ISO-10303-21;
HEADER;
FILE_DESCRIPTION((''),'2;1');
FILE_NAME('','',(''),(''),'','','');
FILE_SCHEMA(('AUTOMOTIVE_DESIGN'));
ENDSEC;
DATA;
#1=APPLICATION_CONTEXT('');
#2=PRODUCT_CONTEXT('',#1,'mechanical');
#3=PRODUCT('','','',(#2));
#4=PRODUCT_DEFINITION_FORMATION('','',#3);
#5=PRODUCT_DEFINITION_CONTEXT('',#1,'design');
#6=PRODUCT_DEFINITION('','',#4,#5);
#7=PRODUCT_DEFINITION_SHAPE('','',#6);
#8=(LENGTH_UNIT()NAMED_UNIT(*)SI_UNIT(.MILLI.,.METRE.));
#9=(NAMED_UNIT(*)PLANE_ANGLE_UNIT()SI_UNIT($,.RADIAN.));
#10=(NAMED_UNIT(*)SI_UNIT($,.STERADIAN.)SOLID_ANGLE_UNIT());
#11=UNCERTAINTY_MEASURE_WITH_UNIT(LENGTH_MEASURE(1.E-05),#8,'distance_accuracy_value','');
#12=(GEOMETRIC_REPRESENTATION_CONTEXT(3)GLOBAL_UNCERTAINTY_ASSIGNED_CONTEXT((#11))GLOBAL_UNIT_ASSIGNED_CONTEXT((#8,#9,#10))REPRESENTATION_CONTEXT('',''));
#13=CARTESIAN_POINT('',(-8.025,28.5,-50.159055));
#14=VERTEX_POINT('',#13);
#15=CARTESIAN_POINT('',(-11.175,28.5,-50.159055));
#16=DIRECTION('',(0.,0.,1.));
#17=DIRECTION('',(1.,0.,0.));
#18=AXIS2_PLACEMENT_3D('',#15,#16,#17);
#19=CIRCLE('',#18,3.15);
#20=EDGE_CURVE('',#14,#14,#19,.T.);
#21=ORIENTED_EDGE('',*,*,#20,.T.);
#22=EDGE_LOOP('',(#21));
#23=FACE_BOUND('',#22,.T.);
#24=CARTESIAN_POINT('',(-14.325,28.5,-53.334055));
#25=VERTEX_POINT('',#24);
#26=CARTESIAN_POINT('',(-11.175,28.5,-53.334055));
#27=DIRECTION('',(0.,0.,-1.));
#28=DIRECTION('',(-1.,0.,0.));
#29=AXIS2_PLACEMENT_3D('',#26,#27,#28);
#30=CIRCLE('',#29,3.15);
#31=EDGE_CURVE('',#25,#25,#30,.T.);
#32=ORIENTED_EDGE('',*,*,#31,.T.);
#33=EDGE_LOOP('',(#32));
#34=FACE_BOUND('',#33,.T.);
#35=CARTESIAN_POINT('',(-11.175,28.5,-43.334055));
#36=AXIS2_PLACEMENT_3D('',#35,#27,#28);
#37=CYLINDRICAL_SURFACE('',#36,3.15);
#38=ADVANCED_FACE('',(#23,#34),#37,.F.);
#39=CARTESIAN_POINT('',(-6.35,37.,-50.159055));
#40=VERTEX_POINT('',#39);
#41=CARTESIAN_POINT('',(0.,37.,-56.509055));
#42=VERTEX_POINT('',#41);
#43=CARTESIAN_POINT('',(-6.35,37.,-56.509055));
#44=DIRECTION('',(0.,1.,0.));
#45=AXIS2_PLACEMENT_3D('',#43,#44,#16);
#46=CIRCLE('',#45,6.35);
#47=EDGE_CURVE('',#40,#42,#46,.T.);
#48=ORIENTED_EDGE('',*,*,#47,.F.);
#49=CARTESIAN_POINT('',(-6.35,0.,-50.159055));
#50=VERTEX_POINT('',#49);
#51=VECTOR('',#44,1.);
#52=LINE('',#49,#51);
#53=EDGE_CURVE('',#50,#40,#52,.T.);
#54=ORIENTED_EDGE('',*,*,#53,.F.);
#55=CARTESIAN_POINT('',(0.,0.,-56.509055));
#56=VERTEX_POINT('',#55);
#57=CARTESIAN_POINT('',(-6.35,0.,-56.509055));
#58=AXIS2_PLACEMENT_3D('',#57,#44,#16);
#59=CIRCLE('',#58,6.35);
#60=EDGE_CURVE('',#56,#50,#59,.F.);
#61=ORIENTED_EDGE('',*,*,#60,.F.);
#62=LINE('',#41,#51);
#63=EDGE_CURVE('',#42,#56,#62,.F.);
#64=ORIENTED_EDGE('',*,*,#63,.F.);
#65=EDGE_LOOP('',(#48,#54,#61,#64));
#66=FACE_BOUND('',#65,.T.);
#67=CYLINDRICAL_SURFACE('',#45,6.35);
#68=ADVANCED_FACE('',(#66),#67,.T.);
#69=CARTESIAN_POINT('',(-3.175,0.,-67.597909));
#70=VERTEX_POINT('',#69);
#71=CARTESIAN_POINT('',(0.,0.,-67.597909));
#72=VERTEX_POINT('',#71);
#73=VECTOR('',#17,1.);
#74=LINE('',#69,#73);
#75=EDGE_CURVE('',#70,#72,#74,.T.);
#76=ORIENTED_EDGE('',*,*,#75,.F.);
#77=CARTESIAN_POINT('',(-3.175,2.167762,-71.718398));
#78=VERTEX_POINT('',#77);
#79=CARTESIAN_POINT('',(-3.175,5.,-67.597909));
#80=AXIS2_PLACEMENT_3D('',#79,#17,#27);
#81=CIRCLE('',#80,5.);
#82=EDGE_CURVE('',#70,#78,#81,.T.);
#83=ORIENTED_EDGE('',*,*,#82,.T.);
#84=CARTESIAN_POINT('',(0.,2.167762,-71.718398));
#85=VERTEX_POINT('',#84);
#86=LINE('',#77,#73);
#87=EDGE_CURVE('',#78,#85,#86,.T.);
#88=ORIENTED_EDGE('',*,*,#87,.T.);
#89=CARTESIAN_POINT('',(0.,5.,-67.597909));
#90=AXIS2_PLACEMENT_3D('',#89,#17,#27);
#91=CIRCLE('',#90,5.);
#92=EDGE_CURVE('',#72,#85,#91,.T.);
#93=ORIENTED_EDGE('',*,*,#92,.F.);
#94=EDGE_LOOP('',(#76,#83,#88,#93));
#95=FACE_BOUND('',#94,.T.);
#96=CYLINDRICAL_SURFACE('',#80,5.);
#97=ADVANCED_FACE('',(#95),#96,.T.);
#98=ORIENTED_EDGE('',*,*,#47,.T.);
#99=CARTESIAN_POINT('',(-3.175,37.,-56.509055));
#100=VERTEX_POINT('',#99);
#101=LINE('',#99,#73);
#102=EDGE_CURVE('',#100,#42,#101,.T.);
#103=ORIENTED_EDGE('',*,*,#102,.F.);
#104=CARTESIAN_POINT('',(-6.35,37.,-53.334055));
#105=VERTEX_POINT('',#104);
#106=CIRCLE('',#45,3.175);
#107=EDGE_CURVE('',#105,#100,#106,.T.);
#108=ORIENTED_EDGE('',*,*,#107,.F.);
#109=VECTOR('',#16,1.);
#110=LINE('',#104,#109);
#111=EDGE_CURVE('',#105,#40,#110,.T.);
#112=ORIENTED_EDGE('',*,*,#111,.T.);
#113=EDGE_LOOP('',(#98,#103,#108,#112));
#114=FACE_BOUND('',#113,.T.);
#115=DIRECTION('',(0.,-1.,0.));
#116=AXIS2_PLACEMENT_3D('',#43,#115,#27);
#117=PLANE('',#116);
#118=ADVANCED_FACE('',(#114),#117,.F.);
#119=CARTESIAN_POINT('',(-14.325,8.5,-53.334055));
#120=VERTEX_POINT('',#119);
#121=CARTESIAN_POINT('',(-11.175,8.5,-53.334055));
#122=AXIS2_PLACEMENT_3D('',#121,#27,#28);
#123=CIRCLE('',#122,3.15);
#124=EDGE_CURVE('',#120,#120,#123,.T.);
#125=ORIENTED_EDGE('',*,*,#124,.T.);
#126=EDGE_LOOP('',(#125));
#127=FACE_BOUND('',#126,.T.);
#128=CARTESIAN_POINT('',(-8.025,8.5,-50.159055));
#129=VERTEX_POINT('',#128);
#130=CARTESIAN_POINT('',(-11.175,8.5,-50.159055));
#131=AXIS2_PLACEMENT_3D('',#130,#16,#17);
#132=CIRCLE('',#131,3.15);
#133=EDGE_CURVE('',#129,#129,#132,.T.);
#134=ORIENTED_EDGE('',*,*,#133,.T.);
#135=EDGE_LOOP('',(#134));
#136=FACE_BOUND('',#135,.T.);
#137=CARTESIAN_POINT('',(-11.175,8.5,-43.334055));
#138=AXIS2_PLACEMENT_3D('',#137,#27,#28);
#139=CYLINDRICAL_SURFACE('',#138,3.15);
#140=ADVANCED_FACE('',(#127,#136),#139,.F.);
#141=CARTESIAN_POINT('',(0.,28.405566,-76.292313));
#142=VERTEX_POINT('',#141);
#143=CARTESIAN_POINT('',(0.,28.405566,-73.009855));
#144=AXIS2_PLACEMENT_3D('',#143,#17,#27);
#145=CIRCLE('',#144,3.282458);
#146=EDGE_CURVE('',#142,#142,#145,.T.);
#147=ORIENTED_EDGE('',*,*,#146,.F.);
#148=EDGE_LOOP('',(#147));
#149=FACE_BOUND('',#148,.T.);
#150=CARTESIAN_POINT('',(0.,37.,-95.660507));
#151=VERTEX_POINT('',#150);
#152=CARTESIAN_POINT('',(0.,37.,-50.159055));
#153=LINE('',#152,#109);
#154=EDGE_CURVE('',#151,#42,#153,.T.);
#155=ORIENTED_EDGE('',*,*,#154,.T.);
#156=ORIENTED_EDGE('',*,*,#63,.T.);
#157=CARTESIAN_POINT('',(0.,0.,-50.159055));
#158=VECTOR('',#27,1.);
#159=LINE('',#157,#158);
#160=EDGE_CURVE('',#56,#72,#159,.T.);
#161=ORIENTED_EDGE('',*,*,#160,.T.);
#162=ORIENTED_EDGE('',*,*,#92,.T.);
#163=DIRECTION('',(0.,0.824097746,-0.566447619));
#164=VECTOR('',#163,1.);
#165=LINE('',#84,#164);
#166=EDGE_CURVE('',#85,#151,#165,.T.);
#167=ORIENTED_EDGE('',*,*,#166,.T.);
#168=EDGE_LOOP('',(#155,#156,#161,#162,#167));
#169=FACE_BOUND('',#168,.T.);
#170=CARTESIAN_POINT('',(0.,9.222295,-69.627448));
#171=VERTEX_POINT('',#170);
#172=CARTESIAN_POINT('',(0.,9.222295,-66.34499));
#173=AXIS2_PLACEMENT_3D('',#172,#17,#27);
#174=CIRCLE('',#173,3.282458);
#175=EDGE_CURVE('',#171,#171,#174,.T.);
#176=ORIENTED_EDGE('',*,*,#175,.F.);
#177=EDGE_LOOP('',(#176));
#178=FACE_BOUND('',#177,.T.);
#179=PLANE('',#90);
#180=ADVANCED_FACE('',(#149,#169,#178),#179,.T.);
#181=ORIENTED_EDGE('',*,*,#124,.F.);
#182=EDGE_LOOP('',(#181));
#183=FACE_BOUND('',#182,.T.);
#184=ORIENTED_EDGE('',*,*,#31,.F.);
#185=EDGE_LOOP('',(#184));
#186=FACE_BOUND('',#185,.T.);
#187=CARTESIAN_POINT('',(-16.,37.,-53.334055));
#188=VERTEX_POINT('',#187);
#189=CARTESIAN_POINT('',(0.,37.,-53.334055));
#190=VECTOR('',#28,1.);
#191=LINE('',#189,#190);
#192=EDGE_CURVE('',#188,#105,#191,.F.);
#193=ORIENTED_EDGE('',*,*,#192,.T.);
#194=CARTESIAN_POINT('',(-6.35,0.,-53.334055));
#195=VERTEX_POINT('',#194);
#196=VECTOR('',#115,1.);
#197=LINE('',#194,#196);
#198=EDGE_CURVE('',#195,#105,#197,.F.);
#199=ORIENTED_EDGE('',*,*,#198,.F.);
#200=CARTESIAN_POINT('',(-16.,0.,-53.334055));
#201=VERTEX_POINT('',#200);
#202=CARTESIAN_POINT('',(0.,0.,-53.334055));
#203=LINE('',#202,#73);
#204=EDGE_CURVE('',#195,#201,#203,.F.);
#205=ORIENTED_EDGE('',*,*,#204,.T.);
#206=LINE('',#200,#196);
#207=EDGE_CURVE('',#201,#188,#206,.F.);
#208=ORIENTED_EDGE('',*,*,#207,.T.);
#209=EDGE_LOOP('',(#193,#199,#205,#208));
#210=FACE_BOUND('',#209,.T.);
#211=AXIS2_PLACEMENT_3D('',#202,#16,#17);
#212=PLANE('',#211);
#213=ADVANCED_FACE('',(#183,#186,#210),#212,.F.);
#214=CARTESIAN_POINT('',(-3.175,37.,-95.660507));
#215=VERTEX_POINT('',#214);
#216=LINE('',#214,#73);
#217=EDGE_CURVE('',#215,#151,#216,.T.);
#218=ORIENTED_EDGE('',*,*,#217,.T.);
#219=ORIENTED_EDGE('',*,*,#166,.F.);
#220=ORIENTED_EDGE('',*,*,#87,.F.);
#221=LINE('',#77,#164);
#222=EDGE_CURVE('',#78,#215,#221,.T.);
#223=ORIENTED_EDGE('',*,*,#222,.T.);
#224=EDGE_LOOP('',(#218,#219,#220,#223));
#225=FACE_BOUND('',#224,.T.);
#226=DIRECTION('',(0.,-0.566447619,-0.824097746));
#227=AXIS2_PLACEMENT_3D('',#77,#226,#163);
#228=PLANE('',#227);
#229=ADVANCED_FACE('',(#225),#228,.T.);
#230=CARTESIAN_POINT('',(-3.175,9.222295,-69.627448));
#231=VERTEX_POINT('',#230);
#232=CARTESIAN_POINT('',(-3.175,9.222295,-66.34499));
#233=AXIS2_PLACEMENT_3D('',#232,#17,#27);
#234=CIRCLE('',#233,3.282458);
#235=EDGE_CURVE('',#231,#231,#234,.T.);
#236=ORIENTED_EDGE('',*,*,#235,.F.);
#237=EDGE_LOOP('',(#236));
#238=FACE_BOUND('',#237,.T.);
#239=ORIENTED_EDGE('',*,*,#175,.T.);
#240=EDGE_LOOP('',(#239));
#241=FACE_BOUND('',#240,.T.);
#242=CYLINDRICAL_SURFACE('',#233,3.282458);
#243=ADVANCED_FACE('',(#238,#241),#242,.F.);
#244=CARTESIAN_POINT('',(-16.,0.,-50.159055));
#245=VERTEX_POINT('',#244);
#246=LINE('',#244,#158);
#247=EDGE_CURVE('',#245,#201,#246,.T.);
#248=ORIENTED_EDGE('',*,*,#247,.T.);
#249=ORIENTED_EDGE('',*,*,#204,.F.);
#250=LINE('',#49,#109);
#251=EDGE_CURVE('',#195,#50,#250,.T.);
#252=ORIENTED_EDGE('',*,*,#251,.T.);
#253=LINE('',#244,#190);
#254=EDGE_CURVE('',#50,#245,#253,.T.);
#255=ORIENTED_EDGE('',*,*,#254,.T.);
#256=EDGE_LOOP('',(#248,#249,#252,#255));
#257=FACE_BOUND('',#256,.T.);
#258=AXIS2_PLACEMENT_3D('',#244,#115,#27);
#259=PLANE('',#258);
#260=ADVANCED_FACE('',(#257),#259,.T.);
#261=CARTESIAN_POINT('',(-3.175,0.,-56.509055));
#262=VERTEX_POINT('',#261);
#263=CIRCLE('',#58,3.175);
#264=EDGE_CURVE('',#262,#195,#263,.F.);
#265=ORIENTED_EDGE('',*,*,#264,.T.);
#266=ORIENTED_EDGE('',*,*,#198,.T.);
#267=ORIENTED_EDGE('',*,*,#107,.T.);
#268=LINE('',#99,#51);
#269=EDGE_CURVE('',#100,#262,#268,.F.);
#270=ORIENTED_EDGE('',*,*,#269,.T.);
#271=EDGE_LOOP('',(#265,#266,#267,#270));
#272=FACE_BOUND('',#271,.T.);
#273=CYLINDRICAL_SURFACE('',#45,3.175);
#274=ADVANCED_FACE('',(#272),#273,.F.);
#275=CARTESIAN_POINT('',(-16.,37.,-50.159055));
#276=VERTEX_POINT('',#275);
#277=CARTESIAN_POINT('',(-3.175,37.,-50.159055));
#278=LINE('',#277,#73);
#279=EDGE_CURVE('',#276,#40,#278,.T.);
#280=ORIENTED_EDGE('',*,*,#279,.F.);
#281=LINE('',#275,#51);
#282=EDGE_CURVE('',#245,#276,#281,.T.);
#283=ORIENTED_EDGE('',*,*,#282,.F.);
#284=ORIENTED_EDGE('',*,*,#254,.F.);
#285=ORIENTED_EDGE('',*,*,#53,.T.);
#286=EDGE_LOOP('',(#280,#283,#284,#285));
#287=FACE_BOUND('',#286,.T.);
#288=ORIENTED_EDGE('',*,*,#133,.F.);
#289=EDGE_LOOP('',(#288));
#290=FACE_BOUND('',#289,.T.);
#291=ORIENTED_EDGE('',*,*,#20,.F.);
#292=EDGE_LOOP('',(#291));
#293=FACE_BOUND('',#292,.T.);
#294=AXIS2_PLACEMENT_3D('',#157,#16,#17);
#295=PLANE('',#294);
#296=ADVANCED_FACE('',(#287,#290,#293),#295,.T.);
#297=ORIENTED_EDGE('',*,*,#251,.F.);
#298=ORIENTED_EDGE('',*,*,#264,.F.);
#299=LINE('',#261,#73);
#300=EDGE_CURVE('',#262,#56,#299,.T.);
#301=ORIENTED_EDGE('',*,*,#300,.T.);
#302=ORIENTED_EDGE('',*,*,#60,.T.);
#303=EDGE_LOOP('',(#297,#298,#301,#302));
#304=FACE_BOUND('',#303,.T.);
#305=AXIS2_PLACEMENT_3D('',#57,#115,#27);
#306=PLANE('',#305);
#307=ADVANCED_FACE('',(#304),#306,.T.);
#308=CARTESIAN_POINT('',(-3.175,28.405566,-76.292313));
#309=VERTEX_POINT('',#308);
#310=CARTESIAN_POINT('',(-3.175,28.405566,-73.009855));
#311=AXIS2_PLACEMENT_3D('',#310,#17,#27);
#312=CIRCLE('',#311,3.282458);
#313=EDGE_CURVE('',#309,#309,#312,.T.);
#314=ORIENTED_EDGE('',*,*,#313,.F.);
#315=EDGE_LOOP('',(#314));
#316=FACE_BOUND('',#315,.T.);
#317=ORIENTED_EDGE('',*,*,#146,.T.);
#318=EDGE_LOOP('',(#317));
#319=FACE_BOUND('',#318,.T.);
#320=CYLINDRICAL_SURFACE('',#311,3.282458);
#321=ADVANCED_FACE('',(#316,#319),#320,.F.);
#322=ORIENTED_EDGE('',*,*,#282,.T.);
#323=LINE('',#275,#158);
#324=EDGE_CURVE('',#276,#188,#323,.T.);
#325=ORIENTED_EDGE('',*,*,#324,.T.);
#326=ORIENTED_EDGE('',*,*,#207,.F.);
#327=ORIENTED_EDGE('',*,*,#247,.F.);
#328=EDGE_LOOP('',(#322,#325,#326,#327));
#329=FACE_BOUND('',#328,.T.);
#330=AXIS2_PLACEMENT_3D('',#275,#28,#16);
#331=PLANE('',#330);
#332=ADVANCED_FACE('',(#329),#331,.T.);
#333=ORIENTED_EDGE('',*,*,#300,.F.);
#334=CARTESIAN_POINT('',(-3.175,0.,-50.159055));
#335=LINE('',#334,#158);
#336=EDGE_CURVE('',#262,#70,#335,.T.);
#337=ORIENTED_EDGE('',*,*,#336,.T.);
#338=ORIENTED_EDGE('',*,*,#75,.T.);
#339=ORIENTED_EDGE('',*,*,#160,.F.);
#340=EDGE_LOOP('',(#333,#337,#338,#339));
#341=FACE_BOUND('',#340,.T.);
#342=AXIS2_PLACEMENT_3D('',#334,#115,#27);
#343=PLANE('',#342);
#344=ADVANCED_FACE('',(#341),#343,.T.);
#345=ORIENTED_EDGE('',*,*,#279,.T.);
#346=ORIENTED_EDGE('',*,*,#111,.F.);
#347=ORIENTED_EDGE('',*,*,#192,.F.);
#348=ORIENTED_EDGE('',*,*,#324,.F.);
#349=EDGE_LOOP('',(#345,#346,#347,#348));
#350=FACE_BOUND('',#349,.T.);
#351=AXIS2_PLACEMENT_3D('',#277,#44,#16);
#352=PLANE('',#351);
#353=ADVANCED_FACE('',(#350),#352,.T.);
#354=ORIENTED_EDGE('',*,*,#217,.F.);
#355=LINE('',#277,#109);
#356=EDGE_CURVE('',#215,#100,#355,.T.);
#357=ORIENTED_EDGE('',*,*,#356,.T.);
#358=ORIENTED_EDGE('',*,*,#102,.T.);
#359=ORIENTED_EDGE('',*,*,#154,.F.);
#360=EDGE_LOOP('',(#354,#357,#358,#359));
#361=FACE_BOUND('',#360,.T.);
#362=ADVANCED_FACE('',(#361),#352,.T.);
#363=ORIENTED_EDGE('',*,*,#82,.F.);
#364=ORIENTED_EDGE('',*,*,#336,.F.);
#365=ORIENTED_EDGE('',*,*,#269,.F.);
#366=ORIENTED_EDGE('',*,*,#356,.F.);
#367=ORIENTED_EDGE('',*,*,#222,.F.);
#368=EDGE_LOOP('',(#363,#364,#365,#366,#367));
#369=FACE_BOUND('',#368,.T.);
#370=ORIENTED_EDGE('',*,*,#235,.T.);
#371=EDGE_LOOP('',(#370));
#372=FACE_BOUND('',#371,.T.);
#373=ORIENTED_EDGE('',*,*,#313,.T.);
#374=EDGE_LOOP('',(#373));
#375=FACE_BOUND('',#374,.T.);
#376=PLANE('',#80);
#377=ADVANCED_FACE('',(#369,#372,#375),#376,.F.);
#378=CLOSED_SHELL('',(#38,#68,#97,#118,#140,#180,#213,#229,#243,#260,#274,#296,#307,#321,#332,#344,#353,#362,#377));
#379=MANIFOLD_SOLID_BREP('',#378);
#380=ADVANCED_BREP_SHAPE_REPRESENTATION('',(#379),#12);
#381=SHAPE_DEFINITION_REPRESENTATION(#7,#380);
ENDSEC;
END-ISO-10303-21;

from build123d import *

# Parameters (mm, degrees)
SKETCH2_R                    = 3.282457618
BASE_FLANGE1_DEPTH           = 3.175
EDGE_FLANGE1_STRIP_W         = 19.05
EDGE_FLANGE1_STRIP_H         = 3.175
EDGE_FLANGE1_STRIP_CUT_DEPTH = 37
EDGE_FLANGE1_DEPTH           = 37
SKETCH6_R                    = 3.15
CUT_EXTRUDE1_DEPTH           = 10


# Sheet-metal steps are written as plain solids
with BuildPart() as part:
    # Sketch2 → Base-Flange1 (new body)
    with BuildSketch(Plane(origin=(0, 0, 0), x_dir=(0, 0, -1), z_dir=(1, 0, 0))):
        with BuildLine():
            Line((50.159054546, 37), (50.159054546, 0))
            Line((50.159054546, 0), (67.597909272, 0))
            ThreePointArc((67.597909272, 0), (69.925870777, 0.575003364), (71.718398003, 2.167761907))
            Line((71.718398003, 2.167761907), (95.660507303, 37))
            Line((95.660507303, 37), (50.159054546, 37))
        make_face()
        with Locations((73.009854993, 28.405566411)):
            Circle(SKETCH2_R, mode=Mode.SUBTRACT)
        with Locations((66.344990455, 9.222294526)):
            Circle(SKETCH2_R, mode=Mode.SUBTRACT)
    extrude(amount=-BASE_FLANGE1_DEPTH)

    # Edge-Flange1 strip (across the edge) → Edge-Flange1 strip cut (cut)
    with BuildSketch(Plane(origin=(-3.175, 0, -50.159054546), x_dir=(0, 0, -1), z_dir=(0, 1, 0))):
        with Locations((-3.175, -1.5875)):
            Rectangle(EDGE_FLANGE1_STRIP_W, EDGE_FLANGE1_STRIP_H)
    extrude(amount=EDGE_FLANGE1_STRIP_CUT_DEPTH, mode=Mode.SUBTRACT)

    # Edge-Flange1 section (across the edge) → Edge-Flange1 (add)
    with BuildSketch(Plane(origin=(-3.175, 0, -50.159054546), x_dir=(0, 0, -1), z_dir=(0, 1, 0))):
        with BuildLine():
            Line((0, 3.175), (0, 12.825))
            Line((0, 12.825), (3.175, 12.825))
            Line((3.175, 12.825), (3.175, 3.175))
            ThreePointArc((3.175, 3.175), (4.10493597, 0.92993597), (6.35, 0))
            Line((6.35, 0), (6.35, -3.175))
            ThreePointArc((6.35, -3.175), (1.859871939, -1.315128061), (0, 3.175))
        make_face()
    extrude(amount=EDGE_FLANGE1_DEPTH)

    # Sketch6 → Cut-Extrude1 (cut)
    with BuildSketch(Plane(origin=(0, 0, -53.334054546), x_dir=(-1, 0, 0), z_dir=(0, 0, -1))):
        with Locations((11.175, 28.5)):
            Circle(SKETCH6_R)
        with Locations((11.175, 8.5)):
            Circle(SKETCH6_R)
    extrude(amount=-CUT_EXTRUDE1_DEPTH, mode=Mode.SUBTRACT)


solid = part.part
